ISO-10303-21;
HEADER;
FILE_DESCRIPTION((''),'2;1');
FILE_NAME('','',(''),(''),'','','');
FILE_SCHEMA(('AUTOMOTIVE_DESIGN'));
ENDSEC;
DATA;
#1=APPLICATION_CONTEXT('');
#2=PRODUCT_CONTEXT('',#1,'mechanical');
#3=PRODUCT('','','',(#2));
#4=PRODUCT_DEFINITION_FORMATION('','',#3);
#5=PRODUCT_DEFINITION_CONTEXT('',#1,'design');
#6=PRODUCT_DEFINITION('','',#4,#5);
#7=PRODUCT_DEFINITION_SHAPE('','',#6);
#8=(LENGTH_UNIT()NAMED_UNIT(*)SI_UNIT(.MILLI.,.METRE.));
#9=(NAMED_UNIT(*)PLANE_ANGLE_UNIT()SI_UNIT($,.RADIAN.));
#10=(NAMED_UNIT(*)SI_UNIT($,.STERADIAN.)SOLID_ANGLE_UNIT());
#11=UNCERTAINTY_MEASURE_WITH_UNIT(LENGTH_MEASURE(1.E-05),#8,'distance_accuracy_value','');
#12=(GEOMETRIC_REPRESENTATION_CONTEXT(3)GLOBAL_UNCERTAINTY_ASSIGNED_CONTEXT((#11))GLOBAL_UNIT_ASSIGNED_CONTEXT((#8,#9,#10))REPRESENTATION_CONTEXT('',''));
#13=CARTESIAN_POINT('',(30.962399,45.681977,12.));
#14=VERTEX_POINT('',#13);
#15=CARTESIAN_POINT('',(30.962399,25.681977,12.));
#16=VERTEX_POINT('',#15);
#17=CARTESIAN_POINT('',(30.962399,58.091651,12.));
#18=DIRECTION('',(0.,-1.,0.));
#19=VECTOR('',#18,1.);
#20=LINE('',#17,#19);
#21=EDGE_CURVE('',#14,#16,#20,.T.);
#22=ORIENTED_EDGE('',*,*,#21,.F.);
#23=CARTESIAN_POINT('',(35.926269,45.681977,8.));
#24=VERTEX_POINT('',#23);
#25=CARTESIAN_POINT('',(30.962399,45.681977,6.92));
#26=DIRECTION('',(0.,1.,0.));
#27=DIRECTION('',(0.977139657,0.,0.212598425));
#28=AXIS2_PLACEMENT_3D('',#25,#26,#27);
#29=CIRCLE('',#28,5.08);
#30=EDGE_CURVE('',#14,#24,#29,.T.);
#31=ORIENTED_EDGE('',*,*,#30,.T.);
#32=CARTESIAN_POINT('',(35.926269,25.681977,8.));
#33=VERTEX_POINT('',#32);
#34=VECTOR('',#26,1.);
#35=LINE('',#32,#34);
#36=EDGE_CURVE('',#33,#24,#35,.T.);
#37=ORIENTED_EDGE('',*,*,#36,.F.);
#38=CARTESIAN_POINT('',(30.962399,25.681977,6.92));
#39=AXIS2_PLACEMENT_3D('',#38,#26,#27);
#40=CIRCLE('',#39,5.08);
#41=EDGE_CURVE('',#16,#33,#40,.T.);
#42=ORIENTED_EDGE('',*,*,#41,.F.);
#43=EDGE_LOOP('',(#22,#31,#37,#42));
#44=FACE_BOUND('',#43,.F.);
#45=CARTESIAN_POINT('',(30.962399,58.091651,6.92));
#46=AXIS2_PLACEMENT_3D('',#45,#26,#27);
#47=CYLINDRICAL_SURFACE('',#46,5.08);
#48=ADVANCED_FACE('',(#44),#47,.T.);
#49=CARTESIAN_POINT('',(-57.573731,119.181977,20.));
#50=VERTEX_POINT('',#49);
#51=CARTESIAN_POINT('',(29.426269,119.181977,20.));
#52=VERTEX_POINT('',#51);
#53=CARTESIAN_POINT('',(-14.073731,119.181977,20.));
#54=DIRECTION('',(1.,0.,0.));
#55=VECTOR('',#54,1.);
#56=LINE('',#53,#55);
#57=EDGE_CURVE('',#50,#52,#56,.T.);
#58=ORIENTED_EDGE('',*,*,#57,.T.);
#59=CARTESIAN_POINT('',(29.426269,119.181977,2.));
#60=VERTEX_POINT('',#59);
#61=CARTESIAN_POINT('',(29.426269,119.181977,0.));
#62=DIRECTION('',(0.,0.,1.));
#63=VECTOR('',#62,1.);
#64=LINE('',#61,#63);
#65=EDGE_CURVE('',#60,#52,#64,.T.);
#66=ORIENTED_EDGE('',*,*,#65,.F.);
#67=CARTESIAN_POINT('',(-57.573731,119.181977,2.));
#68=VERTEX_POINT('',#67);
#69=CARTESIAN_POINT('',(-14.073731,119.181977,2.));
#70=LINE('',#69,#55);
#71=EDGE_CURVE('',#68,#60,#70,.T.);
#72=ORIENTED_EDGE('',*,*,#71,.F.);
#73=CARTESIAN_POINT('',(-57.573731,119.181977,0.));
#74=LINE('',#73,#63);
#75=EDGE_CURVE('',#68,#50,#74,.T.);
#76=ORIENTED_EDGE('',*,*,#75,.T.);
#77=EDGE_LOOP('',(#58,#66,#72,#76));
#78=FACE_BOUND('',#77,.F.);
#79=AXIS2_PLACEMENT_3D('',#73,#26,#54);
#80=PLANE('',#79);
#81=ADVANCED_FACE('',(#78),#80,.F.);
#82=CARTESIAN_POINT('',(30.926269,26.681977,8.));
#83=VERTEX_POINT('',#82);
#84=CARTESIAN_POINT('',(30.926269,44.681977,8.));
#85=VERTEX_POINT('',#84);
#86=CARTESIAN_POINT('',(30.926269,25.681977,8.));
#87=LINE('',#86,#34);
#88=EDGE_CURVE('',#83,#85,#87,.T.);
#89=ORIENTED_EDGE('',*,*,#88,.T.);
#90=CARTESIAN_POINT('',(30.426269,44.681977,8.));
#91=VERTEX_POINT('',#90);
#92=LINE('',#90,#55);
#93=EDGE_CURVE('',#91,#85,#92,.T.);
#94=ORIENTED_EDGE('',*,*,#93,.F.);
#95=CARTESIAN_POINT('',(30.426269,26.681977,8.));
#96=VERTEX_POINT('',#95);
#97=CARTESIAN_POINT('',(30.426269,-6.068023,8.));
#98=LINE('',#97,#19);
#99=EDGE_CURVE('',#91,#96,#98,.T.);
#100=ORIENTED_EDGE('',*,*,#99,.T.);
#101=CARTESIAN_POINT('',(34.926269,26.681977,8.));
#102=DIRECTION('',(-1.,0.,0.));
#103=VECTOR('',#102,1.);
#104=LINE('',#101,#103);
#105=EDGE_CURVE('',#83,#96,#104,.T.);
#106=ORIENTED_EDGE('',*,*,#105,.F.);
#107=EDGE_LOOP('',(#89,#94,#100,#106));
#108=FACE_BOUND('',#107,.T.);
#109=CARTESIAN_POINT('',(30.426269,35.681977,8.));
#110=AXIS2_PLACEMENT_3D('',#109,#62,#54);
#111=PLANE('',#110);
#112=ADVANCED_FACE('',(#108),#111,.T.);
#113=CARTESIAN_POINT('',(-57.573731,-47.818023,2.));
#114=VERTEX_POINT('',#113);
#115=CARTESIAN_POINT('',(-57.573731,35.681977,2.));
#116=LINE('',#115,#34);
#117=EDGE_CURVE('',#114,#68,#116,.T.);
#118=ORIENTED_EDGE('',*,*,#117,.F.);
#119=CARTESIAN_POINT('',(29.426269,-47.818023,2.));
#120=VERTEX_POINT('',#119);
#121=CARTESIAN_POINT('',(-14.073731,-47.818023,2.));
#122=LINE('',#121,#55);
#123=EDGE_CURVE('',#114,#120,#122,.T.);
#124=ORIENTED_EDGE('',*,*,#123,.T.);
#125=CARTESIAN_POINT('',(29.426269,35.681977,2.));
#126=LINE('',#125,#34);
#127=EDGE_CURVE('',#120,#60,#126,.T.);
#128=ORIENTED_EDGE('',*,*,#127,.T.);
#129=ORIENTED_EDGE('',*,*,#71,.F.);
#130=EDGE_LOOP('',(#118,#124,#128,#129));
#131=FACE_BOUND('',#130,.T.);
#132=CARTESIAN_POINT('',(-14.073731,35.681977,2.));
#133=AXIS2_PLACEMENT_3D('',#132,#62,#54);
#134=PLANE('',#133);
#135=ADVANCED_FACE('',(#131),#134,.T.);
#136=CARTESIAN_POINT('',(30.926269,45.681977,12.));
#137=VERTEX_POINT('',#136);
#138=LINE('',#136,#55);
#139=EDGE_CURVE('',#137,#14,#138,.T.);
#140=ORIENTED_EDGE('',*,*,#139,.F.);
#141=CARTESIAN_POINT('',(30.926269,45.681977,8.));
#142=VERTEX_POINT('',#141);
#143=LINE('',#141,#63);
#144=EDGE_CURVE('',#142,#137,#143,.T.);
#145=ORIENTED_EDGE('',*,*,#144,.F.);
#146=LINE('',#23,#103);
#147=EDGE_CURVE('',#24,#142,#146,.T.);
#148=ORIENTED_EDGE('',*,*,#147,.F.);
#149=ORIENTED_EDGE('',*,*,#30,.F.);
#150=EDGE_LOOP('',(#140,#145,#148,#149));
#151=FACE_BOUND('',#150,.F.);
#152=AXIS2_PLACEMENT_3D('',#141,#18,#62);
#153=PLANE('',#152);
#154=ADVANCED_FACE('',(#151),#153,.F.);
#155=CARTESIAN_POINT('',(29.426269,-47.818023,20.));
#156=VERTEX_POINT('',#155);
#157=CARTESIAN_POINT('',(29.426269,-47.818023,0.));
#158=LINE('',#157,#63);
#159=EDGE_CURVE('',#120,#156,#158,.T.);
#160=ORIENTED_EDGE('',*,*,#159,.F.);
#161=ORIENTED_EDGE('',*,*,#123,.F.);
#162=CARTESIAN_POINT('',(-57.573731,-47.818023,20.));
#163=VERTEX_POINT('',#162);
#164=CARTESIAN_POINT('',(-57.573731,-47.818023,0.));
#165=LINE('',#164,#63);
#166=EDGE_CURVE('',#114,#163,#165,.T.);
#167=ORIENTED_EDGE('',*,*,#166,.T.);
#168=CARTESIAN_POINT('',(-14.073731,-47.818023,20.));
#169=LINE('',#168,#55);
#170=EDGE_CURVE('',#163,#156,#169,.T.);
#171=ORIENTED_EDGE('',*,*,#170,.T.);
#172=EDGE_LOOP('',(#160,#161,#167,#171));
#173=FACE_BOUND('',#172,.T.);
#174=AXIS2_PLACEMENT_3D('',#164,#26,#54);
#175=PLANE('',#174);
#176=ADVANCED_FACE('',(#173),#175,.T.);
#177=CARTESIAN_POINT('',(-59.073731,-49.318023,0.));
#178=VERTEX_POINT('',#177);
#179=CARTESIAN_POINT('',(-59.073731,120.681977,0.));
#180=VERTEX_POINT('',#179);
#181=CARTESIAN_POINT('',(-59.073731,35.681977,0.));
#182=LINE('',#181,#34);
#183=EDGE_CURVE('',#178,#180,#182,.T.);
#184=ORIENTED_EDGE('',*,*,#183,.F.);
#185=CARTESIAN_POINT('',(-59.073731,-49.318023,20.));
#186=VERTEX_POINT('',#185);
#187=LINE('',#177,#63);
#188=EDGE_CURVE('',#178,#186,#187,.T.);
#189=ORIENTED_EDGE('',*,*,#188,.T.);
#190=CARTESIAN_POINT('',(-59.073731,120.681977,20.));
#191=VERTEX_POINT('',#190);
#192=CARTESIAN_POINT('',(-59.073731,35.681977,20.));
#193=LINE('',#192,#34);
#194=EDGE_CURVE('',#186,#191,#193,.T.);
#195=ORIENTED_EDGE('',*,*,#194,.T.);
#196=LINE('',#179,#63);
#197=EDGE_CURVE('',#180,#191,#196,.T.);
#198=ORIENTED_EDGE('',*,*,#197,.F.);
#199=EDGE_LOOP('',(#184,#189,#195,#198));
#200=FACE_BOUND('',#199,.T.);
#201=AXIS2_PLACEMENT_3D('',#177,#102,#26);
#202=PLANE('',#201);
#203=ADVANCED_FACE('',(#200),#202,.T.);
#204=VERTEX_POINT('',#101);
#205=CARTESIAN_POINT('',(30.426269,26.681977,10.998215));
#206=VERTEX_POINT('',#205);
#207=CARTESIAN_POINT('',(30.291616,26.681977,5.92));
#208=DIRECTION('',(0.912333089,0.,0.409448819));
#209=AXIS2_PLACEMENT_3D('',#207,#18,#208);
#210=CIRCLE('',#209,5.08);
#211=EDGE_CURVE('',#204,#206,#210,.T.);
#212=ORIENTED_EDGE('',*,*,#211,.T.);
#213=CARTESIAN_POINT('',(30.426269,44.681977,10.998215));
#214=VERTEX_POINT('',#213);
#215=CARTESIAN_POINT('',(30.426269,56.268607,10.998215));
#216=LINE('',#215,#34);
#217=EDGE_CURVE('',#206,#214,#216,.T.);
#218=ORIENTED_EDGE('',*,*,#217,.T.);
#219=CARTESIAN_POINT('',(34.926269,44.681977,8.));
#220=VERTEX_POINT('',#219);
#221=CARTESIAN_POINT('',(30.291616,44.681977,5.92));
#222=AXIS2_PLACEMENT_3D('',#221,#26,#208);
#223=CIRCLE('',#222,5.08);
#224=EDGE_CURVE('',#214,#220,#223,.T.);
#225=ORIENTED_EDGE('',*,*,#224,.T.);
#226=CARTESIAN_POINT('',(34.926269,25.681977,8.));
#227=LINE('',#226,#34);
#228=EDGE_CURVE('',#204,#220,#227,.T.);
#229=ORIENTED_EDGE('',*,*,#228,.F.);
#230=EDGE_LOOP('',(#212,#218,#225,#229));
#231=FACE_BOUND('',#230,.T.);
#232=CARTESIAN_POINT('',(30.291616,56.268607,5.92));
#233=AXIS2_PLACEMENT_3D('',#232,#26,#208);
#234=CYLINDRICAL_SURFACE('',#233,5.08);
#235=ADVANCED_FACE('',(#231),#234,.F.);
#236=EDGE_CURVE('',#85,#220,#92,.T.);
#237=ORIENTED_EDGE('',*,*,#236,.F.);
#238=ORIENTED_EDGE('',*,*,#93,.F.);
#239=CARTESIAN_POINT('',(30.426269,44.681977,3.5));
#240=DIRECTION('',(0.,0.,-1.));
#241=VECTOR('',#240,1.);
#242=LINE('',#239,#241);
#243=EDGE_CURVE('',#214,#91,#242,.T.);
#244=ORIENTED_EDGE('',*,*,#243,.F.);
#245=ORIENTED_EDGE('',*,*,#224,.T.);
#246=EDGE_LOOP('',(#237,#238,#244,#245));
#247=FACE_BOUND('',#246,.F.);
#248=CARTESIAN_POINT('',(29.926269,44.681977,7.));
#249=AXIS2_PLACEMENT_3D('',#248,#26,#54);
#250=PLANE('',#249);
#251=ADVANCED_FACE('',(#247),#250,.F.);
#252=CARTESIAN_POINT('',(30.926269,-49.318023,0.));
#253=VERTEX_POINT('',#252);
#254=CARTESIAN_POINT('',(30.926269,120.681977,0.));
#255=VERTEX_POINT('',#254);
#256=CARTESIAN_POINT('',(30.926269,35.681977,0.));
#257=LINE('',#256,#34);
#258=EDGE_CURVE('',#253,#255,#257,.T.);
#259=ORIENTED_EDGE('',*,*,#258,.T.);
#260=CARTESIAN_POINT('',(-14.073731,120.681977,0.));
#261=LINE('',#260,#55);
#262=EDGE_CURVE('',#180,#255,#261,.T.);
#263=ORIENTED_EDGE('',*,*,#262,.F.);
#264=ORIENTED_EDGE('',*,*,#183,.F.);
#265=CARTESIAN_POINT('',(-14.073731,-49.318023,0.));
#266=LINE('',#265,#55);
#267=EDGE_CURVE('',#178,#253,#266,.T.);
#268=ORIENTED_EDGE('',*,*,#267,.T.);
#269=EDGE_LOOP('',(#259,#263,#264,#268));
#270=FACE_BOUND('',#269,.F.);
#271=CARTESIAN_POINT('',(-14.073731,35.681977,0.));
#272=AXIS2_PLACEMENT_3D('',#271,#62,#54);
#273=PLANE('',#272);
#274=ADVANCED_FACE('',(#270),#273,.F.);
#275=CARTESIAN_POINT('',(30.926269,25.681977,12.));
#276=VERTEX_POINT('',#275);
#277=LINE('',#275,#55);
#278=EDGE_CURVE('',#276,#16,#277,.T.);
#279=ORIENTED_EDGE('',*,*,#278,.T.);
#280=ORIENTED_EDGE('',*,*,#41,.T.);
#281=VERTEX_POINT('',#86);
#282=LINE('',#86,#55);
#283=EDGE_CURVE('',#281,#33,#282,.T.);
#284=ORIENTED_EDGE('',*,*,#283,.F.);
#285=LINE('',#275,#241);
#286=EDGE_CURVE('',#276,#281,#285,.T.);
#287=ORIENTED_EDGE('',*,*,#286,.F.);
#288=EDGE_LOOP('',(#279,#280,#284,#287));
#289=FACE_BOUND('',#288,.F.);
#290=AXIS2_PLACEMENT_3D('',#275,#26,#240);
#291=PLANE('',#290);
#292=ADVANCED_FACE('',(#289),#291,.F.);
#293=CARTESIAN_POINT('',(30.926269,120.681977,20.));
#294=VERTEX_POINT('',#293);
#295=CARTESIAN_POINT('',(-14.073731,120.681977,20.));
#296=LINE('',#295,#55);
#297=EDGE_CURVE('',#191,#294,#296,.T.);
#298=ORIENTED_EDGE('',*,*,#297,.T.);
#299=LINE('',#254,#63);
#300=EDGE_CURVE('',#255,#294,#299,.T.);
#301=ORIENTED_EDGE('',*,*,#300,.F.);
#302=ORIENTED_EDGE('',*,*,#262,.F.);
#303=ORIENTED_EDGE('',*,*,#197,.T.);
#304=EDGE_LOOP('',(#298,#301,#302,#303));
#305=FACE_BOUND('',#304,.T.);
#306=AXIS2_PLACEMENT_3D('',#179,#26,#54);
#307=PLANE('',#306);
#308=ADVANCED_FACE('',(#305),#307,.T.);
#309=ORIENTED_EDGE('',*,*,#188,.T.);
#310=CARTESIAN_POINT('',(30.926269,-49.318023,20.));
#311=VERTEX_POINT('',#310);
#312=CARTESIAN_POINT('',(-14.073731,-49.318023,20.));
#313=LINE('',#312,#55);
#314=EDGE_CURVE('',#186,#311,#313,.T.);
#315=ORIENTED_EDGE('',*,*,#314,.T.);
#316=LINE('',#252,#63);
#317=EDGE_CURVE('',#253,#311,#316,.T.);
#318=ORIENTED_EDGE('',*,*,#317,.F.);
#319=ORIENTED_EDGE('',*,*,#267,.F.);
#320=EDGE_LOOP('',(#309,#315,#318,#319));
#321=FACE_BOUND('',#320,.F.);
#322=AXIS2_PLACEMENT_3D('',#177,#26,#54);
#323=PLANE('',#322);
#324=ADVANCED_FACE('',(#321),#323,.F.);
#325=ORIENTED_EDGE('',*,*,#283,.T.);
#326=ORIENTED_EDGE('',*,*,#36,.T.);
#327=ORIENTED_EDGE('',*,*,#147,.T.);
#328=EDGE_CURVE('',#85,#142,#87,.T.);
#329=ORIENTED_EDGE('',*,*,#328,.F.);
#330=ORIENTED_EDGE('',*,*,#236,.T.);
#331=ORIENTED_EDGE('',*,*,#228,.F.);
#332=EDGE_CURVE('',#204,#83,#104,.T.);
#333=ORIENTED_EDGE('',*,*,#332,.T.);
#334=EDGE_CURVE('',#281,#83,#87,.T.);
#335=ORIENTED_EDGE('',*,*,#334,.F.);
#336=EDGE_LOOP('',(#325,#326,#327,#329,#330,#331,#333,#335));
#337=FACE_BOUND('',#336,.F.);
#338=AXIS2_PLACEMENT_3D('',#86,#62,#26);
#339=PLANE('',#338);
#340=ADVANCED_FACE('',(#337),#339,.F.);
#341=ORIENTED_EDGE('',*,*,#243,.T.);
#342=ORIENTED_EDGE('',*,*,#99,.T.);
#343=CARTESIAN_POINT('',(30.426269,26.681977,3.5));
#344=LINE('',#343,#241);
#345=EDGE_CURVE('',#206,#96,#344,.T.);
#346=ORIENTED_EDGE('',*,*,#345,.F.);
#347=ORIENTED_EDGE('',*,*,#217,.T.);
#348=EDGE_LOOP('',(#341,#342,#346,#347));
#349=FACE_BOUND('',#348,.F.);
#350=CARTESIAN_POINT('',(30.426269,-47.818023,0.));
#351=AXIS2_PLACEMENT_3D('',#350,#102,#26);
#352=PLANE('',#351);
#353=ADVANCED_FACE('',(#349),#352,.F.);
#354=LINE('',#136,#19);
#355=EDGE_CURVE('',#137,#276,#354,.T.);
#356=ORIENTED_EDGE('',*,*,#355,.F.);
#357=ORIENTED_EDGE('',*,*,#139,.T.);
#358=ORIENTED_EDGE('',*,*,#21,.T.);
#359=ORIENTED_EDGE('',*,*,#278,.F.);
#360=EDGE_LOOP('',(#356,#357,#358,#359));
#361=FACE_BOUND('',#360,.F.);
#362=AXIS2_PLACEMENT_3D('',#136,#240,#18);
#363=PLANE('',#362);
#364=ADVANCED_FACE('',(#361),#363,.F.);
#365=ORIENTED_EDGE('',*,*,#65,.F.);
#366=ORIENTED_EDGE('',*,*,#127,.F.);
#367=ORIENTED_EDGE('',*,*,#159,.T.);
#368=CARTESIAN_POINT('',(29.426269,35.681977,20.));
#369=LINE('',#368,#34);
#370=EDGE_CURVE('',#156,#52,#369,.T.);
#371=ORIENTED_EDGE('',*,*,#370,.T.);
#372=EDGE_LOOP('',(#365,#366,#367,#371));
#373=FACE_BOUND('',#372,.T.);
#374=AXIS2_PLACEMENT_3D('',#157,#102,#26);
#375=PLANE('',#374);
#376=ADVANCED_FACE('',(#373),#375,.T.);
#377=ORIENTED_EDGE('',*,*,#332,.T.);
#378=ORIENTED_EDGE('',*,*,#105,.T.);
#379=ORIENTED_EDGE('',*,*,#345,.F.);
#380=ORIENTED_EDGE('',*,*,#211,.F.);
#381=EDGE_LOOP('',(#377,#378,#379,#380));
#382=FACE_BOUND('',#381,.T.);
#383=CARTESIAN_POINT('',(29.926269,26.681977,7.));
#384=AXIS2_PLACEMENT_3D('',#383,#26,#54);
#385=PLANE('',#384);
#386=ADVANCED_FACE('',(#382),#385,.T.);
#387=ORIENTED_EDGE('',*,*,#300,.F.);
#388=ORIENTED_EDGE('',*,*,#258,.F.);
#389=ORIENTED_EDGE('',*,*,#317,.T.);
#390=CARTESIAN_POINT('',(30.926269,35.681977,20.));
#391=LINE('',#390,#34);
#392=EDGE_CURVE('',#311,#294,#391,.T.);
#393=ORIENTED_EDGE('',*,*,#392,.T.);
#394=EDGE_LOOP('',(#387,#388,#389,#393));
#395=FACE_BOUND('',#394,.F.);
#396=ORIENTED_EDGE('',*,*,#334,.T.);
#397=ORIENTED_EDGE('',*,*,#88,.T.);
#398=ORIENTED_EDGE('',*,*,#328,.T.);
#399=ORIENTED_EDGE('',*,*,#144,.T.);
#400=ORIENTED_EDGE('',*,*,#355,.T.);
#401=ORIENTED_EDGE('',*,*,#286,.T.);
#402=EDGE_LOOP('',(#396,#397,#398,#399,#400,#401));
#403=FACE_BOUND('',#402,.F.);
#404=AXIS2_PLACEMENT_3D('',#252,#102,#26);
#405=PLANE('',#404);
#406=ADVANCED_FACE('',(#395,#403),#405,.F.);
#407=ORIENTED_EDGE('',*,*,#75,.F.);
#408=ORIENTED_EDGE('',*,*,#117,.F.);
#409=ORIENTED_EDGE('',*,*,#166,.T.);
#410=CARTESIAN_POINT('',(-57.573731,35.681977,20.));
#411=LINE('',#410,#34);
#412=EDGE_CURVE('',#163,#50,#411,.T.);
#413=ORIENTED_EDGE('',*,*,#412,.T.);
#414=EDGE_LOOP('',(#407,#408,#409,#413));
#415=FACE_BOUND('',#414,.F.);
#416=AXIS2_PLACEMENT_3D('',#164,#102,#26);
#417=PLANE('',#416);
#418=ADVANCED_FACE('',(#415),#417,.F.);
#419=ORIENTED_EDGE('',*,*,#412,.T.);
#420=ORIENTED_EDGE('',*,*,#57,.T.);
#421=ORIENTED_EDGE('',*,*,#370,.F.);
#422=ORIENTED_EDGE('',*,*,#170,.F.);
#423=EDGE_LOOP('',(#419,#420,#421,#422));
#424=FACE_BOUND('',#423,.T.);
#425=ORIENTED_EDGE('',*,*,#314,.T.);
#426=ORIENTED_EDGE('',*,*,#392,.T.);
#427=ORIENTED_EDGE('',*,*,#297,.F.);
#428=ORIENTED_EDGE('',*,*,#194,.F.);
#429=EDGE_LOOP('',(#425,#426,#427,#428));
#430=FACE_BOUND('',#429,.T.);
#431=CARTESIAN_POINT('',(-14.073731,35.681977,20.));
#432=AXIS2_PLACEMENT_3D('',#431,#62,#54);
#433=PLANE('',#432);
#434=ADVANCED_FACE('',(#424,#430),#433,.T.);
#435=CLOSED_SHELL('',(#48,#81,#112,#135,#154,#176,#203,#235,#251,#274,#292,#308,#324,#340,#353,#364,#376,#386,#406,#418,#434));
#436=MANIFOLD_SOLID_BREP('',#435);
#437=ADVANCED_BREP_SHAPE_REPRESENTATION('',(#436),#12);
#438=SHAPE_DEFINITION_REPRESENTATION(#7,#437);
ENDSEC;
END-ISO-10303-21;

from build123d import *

# Parameters (mm, degrees)
F0_W         = 90
F0_H         = 170
F0_W_2       = 87
F0_H_2       = 167
F1_DEPTH     = 20
F2_DEPTH     = 2
F4_DEPTH     = 5
F5_T         = 1
F5_T3_DEPTH  = 6
F5_T5_DEPTH  = 22
F5_T7_DEPTH  = 89
F5_T9_DEPTH  = 20
F5_T11_DEPTH = 169
F6_T4_DEPTH  = 29.5866302263
F6_T6_DEPTH  = 44.819347292


# Not quite as in the source:
# - a fillet or chamfer that OpenCascade refuses, or shapes differently, is made with other operations: its cross-section is extruded or revolved along the edge and cut away or added
# - a shell that OpenCascade refuses in one call is made with other operations: the cavity is built on its own and cut out


with BuildPart() as f1:
    # F0 (on Top) → F1 (new body)
    with BuildSketch(Plane.XY):
        with Locations((-14.0737314522, 35.681976974)):
            Rectangle(F0_W, F0_H)
        with Locations((-14.0737314522, 35.681976974)):
            Rectangle(F0_W_2, F0_H_2, mode=Mode.SUBTRACT)
    extrude(amount=F1_DEPTH)

    # F0 (on Top) → F2 (join)
    with BuildSketch(Plane.XY):
        with Locations((-14.0737314522, 35.681976974)):
            Rectangle(F0_W_2, F0_H_2)
    extrude(amount=F2_DEPTH)

    # F3 (on face) → F4 (join)
    with BuildSketch(Plane.YZ.offset(30.9262685478)):
        Polygon((45.681976974, 12), (35.681976974, 12), (25.681976974, 12), (25.681976974, 8), (45.681976974, 8), align=None)
    extrude(amount=F4_DEPTH)

    # F5: shell of thickness 1, made by hand


with BuildPart() as f5_core1:
    # F5_t2: copy of F1
    add(f1.part)

    # the walls: a layer under each face that stays
    f5_faces = [f5_core1.faces().sort_by_distance(p)[0] for p in [
        (30.9262685478, -20.9846896927, 16.6666666667),
        (-14.0737314522, -49.318023026, 10),
        (-14.0737314522, 35.681976974, 0),
        (-57.6674814522, 85.0029646283, 20),
        (-14.0737314522, 120.681976974, 10),
        (33.4262685478, 45.681976974, 10),
        (33.4262685478, 25.681976974, 10),
        (33.4262685478, 35.681976974, 12),
        (-59.0737314522, 35.681976974, 10),
        (-14.0737314522, -47.818023026, 11),
        (-57.5737314522, 35.681976974, 11),
        (-14.0737314522, 119.181976974, 11),
        (29.4262685478, 35.681976974, 11),
        (35.9262685478, 35.681976974, 10),
        (-14.0737314522, 35.681976974, 2),
    ]]
    thicken(f5_faces, amount=-F5_T, mode=Mode.SUBTRACT)

    # F5_s4 → F5_t3 (cut)
    with BuildSketch(Plane.XY.offset(7)):
        Polygon((30.9362685478, 45.691976974), (29.9262685478, 45.681976974), (29.9262685478, 44.681976974), (30.9262685478, 44.681976974), align=None)
        Polygon((30.9362685478, 25.671976974), (29.9262685478, 25.681976974), (29.9262685478, 26.681976974), (30.9262685478, 26.681976974), align=None)
    extrude(amount=F5_T3_DEPTH, mode=Mode.SUBTRACT)

    # F5_s6 → F5_t5 (cut)
    with BuildSketch(Plane.XZ.offset(-46.681976974)):
        Polygon((30.9362685478, 12.01), (29.9262685478, 12), (29.9262685478, 11), (30.9262685478, 11), align=None)
    extrude(amount=F5_T5_DEPTH, mode=Mode.SUBTRACT)

    # F5_s8 → F5_t7 (cut)
    with BuildSketch(Plane.YZ.offset(-58.5737314522)):
        Polygon((-47.808023026, 2.01), (-48.818023026, 2), (-48.818023026, 1), (-47.818023026, 1), align=None)
        Polygon((119.171976974, 2.01), (120.181976974, 2), (120.181976974, 1), (119.181976974, 1), align=None)
    extrude(amount=F5_T7_DEPTH, mode=Mode.SUBTRACT)

    # F5_s10 → F5_t9 (cut)
    with BuildSketch(Plane.XY.offset(1)):
        Polygon((-57.5637314522, -47.808023026), (-57.5737314522, -48.818023026), (-58.5737314522, -48.818023026), (-58.5737314522, -47.818023026), align=None)
        Polygon((29.4162685478, -47.808023026), (29.4262685478, -48.818023026), (30.4262685478, -48.818023026), (30.4262685478, -47.818023026), align=None)
        Polygon((-57.5637314522, 119.171976974), (-58.5737314522, 119.181976974), (-58.5737314522, 120.181976974), (-57.5737314522, 120.181976974), align=None)
        Polygon((29.4162685478, 119.171976974), (29.4262685478, 120.181976974), (30.4262685478, 120.181976974), (30.4262685478, 119.181976974), align=None)
    extrude(amount=F5_T9_DEPTH, mode=Mode.SUBTRACT)

    # F5_s12 → F5_t11 (cut)
    with BuildSketch(Plane.XZ.offset(-120.181976974)):
        Polygon((-57.5637314522, 2.01), (-58.5737314522, 2), (-58.5737314522, 1), (-57.5737314522, 1), align=None)
        Polygon((29.4162685478, 2.01), (30.4262685478, 2), (30.4262685478, 1), (29.4262685478, 1), align=None)
    extrude(amount=F5_T11_DEPTH, mode=Mode.SUBTRACT)


with BuildPart() as f1_1:
    add(f1.part)

    # what is left inside the walls is the cavity
    f5_cavity = [f5_core1.part.solids().sort_by_distance(p)[0] for p in [
        (32.676269, 32.681977, 8.01),
    ]]
    add(f5_cavity, mode=Mode.SUBTRACT)

    # F6: fillet of radius 5.08 on 5 edges, made by hand


with BuildPart() as f6_tool2:
    # F6_s3 → F6_t4 (new body)
    with BuildSketch(Plane.XZ.offset(-56.2686072003)):
        with BuildLine():
            ThreePointArc((34.9262685478, 8), (33.0520512056, 10.1845515591), (30.2916164573, 11))
            Line((30.2916164573, 11), (34.9262685478, 11))
            Line((34.9262685478, 11), (34.9262685478, 8))
        make_face()
    extrude(amount=F6_T4_DEPTH)

    split(bisect_by=Plane.XZ.offset(-45.681976974), keep=Keep.TOP)


with BuildPart() as f1_2:
    add(f1_1.part)

    # F6_t1: union F6_tool2
    add(f6_tool2.part)

    # F6_s7 → F6_t6 (cut)
    with BuildSketch(Plane.XZ.offset(-58.09165062)):
        with BuildLine():
            ThreePointArc((35.9262685478, 8), (34.1498745795, 10.8755530587), (30.9623990894, 12))
            Line((30.9623990894, 12), (35.9262685478, 12))
            Line((35.9262685478, 12), (35.9262685478, 8))
        make_face()
    extrude(amount=F6_T6_DEPTH, mode=Mode.SUBTRACT)


solid = f1_2.part
